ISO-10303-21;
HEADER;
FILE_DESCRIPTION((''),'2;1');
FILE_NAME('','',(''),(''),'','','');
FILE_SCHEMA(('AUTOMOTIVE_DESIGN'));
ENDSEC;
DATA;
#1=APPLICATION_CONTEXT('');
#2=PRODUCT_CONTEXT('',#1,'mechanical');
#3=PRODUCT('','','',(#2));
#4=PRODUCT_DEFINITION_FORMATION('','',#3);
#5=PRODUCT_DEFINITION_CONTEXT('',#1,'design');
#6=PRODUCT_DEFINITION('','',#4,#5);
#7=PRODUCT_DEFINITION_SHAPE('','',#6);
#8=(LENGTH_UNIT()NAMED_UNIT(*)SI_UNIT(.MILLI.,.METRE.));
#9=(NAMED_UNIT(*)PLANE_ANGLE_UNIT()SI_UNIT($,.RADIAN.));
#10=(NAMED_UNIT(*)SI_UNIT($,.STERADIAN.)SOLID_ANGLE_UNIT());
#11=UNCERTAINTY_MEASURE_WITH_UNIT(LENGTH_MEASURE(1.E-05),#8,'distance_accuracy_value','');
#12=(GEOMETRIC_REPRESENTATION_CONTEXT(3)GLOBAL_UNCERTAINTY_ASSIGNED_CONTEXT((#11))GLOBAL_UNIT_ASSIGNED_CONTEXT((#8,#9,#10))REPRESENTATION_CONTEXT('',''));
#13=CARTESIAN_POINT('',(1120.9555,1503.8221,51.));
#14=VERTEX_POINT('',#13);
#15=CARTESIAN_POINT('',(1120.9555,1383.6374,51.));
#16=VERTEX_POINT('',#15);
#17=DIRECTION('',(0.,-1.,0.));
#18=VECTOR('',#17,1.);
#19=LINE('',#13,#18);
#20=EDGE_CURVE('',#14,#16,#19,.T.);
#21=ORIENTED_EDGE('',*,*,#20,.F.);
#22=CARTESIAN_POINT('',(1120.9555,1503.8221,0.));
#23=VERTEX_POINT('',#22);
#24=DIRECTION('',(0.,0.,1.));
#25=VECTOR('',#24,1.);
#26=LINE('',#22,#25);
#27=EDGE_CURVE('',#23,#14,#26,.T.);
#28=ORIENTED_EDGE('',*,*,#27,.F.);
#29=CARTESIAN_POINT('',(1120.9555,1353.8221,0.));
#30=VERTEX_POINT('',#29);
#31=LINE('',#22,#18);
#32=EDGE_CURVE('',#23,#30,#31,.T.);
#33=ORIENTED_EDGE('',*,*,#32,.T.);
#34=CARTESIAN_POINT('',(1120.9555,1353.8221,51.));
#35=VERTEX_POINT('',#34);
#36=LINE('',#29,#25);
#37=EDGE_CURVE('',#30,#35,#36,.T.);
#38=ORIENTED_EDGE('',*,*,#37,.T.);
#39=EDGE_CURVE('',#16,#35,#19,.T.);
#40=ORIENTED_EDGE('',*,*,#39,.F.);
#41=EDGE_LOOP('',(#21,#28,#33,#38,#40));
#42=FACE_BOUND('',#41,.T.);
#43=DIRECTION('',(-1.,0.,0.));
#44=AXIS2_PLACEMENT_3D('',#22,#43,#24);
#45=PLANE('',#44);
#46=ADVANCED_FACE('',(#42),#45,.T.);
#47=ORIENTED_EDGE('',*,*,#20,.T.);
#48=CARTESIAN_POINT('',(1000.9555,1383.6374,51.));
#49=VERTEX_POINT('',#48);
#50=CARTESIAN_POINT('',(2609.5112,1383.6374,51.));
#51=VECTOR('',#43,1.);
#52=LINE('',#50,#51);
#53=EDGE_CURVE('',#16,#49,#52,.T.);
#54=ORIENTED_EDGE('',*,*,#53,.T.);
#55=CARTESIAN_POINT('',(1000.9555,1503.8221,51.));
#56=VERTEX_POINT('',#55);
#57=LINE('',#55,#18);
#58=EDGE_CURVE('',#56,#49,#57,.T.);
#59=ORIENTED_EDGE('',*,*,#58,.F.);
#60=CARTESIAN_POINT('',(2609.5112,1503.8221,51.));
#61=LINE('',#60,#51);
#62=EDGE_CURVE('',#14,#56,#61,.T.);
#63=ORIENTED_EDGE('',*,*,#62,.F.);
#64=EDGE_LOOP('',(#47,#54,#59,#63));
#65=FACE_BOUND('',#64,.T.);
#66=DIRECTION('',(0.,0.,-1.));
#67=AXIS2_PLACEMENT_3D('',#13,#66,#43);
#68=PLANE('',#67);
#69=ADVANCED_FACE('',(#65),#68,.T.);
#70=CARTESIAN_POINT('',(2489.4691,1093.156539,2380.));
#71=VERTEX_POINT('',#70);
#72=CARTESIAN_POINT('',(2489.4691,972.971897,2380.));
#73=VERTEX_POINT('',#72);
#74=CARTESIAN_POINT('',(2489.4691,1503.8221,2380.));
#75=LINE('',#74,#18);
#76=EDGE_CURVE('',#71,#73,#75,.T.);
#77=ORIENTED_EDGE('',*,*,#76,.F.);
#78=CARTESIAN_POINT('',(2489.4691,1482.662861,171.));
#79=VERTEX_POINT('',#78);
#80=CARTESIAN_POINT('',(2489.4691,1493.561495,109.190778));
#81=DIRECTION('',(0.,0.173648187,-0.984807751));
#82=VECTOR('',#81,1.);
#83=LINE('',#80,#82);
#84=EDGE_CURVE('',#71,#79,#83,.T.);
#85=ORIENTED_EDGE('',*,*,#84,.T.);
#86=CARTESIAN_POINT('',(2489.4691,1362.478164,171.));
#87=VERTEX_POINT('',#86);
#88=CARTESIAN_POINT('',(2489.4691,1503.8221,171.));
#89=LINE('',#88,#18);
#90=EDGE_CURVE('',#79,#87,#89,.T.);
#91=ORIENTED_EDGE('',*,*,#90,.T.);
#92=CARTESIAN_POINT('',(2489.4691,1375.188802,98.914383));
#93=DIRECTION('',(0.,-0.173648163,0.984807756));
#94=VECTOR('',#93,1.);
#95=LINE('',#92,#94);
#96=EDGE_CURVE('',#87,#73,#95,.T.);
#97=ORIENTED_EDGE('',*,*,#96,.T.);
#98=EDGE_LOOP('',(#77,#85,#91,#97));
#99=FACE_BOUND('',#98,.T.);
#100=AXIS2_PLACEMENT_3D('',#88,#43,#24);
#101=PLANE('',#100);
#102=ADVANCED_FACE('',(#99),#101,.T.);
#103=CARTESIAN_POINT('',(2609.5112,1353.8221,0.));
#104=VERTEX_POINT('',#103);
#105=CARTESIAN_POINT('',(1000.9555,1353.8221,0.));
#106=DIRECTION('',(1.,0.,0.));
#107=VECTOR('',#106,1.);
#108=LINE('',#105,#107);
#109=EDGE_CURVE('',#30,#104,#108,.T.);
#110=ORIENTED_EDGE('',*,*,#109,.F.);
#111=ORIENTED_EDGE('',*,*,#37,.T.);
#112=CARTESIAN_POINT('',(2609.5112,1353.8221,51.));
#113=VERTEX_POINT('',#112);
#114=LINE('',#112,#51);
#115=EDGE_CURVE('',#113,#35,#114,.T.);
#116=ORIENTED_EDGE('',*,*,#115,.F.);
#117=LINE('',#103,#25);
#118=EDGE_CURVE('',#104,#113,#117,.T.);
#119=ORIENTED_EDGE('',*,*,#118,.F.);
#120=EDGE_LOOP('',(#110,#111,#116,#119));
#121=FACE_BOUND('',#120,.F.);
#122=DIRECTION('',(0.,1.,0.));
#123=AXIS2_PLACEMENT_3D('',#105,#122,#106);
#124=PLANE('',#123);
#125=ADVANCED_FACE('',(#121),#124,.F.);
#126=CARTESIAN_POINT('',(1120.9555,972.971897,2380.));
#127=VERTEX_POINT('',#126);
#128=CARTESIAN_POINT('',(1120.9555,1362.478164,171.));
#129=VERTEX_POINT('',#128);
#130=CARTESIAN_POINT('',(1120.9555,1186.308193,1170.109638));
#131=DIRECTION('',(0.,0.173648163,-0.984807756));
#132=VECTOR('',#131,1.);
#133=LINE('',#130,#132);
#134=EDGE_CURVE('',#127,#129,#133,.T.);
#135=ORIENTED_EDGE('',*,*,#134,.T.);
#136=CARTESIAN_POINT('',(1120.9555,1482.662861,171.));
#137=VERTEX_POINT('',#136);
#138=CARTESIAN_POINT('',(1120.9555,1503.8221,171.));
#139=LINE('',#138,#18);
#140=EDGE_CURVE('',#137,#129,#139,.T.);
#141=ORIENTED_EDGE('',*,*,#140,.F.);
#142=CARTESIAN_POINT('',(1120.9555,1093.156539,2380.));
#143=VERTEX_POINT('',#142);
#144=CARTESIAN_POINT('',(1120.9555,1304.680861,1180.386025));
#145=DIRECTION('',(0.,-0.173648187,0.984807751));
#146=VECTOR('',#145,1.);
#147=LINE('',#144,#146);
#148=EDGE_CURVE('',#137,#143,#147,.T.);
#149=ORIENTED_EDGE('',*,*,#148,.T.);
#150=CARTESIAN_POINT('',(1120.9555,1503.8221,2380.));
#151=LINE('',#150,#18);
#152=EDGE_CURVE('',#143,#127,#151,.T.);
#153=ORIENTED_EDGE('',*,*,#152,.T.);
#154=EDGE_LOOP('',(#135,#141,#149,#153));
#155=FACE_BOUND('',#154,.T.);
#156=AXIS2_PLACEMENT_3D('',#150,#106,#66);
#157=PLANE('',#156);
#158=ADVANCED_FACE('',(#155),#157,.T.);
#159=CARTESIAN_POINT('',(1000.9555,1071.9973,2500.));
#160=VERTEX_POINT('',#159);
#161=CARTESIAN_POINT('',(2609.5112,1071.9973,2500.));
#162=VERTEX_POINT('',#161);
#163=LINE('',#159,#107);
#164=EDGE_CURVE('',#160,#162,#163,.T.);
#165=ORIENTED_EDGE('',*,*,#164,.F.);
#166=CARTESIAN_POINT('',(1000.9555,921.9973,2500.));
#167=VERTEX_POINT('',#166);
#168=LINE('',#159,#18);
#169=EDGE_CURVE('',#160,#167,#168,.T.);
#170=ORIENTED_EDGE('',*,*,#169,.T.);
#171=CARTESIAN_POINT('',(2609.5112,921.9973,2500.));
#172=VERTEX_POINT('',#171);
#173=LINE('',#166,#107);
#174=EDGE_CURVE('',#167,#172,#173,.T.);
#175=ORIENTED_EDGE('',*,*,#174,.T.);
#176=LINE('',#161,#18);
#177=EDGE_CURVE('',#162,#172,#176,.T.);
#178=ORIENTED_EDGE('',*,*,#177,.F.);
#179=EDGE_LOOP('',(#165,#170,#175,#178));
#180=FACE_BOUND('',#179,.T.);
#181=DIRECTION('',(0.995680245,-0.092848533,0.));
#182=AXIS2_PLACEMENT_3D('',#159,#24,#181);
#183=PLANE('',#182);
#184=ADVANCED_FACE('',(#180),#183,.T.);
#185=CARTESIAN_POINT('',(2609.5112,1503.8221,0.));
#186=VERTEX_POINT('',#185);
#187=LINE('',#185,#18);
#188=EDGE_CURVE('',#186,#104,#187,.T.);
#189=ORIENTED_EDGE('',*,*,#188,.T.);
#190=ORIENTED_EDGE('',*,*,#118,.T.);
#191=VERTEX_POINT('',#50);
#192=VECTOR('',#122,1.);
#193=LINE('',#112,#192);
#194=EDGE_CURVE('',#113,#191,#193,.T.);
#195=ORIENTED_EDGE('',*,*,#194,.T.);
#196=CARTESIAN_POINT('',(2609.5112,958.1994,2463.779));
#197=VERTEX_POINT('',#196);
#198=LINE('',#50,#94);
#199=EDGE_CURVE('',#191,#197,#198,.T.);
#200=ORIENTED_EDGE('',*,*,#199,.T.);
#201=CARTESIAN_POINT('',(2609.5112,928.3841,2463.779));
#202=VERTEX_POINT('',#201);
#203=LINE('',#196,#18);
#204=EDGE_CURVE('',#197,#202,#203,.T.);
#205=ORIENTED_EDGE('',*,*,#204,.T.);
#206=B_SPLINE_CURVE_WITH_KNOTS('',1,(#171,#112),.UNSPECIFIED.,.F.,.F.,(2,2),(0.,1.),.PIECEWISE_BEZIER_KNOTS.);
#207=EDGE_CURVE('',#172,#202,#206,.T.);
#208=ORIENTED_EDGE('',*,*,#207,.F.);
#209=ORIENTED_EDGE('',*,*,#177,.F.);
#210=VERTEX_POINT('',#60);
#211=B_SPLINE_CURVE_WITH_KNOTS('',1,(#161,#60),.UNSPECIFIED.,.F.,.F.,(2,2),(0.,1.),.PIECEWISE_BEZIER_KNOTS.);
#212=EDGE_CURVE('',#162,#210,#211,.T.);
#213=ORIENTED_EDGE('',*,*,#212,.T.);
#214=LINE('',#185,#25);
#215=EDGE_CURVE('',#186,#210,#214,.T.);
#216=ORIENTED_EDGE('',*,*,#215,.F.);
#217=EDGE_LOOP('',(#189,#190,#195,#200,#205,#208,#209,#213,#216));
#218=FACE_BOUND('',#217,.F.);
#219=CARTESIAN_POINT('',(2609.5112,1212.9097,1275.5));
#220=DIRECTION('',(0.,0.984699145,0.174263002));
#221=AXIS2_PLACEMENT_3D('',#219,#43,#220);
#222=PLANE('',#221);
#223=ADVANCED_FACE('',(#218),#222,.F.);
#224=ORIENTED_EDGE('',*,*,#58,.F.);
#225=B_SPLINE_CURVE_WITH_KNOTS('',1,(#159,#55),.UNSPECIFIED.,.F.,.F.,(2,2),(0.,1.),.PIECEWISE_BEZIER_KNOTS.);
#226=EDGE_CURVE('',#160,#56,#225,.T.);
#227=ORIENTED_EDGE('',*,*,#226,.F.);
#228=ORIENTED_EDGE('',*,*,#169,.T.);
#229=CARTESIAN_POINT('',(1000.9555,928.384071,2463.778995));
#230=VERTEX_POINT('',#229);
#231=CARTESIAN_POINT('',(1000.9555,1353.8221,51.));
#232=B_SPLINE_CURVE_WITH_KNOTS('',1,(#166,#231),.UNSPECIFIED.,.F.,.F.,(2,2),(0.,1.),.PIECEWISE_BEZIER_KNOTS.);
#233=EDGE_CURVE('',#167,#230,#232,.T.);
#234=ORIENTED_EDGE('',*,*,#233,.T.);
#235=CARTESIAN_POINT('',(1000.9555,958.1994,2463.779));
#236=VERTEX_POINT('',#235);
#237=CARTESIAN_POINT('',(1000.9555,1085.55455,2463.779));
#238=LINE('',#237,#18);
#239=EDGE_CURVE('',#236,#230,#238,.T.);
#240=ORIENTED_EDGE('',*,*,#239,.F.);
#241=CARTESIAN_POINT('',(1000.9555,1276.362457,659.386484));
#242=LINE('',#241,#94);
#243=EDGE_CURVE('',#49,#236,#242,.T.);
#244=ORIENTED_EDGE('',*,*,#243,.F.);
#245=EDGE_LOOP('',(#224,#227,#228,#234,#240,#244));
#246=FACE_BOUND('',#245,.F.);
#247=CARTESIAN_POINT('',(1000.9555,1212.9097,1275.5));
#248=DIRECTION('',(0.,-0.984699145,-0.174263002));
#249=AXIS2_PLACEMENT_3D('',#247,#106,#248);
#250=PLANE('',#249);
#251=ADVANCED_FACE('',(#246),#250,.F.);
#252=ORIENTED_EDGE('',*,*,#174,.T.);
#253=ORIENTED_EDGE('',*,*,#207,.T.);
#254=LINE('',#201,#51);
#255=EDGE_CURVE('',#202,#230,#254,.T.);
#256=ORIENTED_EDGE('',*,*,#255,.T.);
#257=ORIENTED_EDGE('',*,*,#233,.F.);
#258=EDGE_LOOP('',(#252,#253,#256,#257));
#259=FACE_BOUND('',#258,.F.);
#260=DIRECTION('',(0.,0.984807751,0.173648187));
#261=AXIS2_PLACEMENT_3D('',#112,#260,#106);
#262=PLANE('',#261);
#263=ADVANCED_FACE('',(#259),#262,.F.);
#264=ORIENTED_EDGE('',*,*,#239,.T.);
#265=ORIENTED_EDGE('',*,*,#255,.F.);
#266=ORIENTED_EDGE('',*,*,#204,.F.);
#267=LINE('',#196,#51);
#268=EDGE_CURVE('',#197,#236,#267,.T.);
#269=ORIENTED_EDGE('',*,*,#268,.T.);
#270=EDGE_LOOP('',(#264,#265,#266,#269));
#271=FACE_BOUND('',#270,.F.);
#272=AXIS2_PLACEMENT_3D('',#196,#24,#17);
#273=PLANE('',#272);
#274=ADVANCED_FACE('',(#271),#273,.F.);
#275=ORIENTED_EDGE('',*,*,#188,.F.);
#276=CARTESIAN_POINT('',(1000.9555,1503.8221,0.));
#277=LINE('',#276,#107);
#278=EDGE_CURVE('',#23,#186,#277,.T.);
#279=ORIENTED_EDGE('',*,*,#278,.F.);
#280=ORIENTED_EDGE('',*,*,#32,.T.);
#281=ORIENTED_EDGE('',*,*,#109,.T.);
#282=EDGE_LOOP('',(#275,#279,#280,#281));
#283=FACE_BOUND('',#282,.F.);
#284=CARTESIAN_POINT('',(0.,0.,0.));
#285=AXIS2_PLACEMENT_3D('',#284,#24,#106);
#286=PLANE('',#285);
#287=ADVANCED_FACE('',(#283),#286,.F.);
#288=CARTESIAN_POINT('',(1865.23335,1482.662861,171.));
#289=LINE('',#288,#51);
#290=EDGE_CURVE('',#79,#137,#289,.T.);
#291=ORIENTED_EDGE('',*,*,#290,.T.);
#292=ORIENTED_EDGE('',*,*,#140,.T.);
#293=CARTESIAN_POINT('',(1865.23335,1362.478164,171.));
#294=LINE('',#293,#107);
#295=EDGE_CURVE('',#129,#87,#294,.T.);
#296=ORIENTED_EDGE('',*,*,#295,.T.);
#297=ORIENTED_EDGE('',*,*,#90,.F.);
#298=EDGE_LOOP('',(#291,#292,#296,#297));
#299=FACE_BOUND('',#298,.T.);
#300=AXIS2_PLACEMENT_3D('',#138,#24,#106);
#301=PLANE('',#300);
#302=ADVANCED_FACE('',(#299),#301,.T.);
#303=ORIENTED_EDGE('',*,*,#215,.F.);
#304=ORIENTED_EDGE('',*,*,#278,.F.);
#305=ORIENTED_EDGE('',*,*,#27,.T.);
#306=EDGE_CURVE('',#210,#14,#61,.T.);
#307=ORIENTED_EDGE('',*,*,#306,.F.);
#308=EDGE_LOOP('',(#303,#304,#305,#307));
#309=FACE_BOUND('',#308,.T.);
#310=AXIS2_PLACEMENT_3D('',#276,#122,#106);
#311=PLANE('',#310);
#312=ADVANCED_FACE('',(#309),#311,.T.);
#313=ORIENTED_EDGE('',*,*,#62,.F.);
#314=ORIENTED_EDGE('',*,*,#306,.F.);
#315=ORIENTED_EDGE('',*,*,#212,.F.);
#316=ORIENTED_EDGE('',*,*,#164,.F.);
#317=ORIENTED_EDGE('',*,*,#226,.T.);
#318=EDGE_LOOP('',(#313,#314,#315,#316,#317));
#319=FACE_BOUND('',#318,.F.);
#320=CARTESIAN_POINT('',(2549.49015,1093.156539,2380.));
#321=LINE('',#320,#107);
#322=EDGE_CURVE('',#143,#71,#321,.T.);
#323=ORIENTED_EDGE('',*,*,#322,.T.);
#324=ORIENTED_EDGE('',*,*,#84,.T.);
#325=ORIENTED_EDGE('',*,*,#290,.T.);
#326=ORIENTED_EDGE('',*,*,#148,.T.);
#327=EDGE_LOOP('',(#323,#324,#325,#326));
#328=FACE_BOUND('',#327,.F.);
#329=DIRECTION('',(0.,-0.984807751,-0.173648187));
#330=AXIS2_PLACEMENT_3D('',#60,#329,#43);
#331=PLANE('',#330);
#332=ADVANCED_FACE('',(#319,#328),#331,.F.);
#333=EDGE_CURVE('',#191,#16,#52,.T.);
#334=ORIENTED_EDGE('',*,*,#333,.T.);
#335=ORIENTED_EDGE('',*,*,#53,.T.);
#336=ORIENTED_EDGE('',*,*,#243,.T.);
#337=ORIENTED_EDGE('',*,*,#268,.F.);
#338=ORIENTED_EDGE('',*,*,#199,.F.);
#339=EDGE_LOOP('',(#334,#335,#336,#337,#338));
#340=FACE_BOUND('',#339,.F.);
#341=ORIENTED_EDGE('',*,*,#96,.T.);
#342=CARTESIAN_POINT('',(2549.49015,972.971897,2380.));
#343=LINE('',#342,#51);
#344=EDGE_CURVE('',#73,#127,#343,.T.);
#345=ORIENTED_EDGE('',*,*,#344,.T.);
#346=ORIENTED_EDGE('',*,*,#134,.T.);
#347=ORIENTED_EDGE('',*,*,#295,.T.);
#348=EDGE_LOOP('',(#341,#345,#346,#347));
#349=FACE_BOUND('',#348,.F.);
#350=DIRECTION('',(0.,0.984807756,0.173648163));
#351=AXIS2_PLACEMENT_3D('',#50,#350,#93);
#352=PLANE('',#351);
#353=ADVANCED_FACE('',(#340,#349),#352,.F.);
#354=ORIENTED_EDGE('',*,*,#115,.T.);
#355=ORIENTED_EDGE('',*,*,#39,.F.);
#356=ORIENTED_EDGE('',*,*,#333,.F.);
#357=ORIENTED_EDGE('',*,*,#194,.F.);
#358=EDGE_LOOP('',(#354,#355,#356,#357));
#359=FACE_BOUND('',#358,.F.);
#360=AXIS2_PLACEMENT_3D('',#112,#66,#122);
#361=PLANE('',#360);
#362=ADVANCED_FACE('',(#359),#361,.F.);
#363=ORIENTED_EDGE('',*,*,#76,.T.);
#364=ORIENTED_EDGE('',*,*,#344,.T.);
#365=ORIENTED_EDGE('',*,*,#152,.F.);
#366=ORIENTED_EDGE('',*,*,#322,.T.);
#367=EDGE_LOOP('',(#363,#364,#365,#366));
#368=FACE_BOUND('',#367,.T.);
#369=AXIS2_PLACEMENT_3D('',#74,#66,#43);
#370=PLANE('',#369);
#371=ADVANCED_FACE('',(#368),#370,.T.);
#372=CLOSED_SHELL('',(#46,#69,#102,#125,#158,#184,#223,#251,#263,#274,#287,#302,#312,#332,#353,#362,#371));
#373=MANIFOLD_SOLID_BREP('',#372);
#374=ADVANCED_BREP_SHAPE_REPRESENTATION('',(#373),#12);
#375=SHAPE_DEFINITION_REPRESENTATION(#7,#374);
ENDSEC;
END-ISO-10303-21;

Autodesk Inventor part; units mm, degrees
sketch "Sketch19" plane through (0, 0, 0) normal (0, 0, 1) x (1, 0, 0)
  line L0 (1200.9555, -1496.1779) -> (1200.9555, 1503.8221)
  line L1 (-4726.1559, 1503.8221) -> (4728.0669, 1503.8221)
  line L2 (4418.0669, -1496.1779) -> (4418.0669, 1503.8221)
  line L3 (1200.9555, 1503.8221) -> (4418.0669, 1503.8221)
  line L4 (1200.9555, 1503.8221) -> (1000.9555, 1503.8221)
  line L5 (1000.9555, 1503.8221) -> (1000.9555, -1496.1779)
  line L6 (2809.5112, 1503.8221) -> (2609.5112, 1503.8221)
  line L7 (2609.5112, 1503.8221) -> (2609.5112, -1496.1779)
  line L8 (2609.5112, -1496.1779) -> (2509.5112, -1496.1779)
  line L9 (2509.5112, -1496.1779) -> (2509.5112, 1503.8221)
  line L10 (1200.9555, -1496.1779) -> (1000.9555, -1496.1779)
  line L11 (1000.9555, 1503.8221) -> (1000.9555, 1353.8221)
  line L12 (1000.9555, 1353.8221) -> (2609.5112, 1353.8221)
  point P0 (0, 0)
  dimension "d29" = 200
  dimension "d30" = 200
  dimension "d31" = 100
  dimension "d32" = 150
ref_plane "Work Plane17" through (0, 0, 2500) normal (0, 0, 1) x (1, 0, 0)
sketch "Sketch20" plane through (0, 0, 2500) normal (0, 0, 1) x (1, 0, 0)
  line L0 (-4726.1559, 1503.8221) -> (4728.0669, 1503.8221) projected
  line L1 (1200.9555, -1496.1779) -> (1200.9555, 1503.8221) projected
  line L2 (1000.9555, 1503.8221) -> (1000.9555, -1496.1779) projected
  line L3 (2509.5112, -1496.1779) -> (2509.5112, 1503.8221) projected
  line L4 (2609.5112, 1503.8221) -> (2609.5112, -1496.1779) projected
  line L5 (1000.9555, 1353.8221) -> (2609.5112, 1353.8221) projected
  point P0 (0, 0)
extrude "Extrusion4" add sketch "Sketch19" along normal blind 51 contours L12 L5 L1 L0 | L0 L1 L9 L12 | L9 L1 L7 L12
ref_plane "Work Plane18" through (0, 0, 51) normal (0, 0, 1) x (1, 0, 0)
sketch "Sketch22" plane through (0, 0, 51) normal (0, 0, 1) x (1, 0, 0)
  line L0 (2609.5112, 1503.8221) -> (1000.9555, 1503.8221) projected
  line L1 (1000.9555, 1503.8221) -> (1000.9555, 1353.8221) projected
  line L2 (1000.9555, 1353.8221) -> (2609.5112, 1353.8221) projected
  line L3 (2609.5112, 1353.8221) -> (2609.5112, 1503.8221) projected
  line L4 (1000.9555, 1503.8221) -> (2609.5112, 1503.8221)
  line L5 (2609.5112, 1503.8221) -> (2609.5112, 1353.8221)
  line L6 (2609.5112, 1353.8221) -> (1000.9555, 1353.8221)
  line L7 (1000.9555, 1353.8221) -> (1000.9555, 1503.8221)
  point P0 (0, 0)
ref_plane "Work Plane19" through (1000.9555, 1503.8221, 51) normal (-1, 0, 0) x (0, -1, 0)
sketch "Sketch23" plane through (1000.9555, 1503.8221, 51) normal (-1, 0, 0) x (0, -1, 0)
  line L0 (150, 0) -> (0, 0) projected
  line L1 (0, 2449) -> (3000, 2449) projected
  line L2 (0, 0) -> (431.8248, 2449)
  line L3 (0, 0) -> (2486.7798, 0) construction
  line L4 (0, 0) -> (150, 0)
  line L5 (150, 0) -> (0, 0)
  line L6 (150, 0) -> (581.8248, 2449)
  line L7 (150, 0) -> (2636.7798, 0) construction
  line L8 (581.8248, 2449) -> (431.8248, 2449)
  point P0 (1503.8221, -51)
  point P1 (0, 2449)
  dimension "d37" = 80
  dimension "d38" = 80
sketch "Sketch24" plane through (0, 0, 2500) normal (0, 0, 1) x (1, 0, 0)
  line L0 (1000.9555, 1071.9973) -> (2609.5112, 1071.9973)
  line L1 (1000.9555, 921.9973) -> (2609.5112, 921.9973)
  line L2 (2609.5112, 1071.9973) -> (2609.5112, 921.9973)
  line L3 (1000.9555, 1071.9973) -> (1000.9555, 921.9973)
  point P0 (0, 0)
loft "Loft2" add profiles "Sketch24" section 2 edges at (2609.5112, 1428.8221, 51) (1805.2334, 1503.8221, 51) (1000.9555, 1428.8221, 51) (1805.2334, 1353.8221, 51)
sketch "Sketch25" plane through (2609.5112, 1353.8221, 0) normal (1, 0, 0) x (0, 0, -1)
  line L0 (0, 0) -> (0, 150) projected
  line L1 (0, 150) -> (-51, 150) projected
  line L2 (-2500, -281.8248) -> (-51, 150) projected
  line L3 (-2500, -281.8248) -> (-2500, -431.8248) projected
  line L4 (-2500, -431.8248) -> (-51, 0) projected
  line L5 (0, 0) -> (-51, 0) projected
  line L6 (-51, 0) -> (-51, 29.8153)
  line L7 (-51, 0) -> (-21.1847, 0) construction
  line L8 (-51, 29.8153) -> (-2463.779, -395.6227)
  line L9 (-2500, -431.8248) -> (-51, 0) projected
  line L10 (-51, 29.8153) -> (2399, 29.8153) construction
  line L11 (-2463.779, -395.6227) -> (-2463.779, -425.438)
  line L12 (-2463.779, -425.438) -> (-51, 0)
  point P0 (0, -1353.8221)
  point P1 (-2463.779, -425.438)
  point P2 (-51, 0)
  dimension "d43" = 90
  dimension "d44" = 2450
  dimension "d45" = 170
extrude "Extrusion5" cut sketch "Sketch25" against normal through all contours L4 L11 L8 L6
ref_plane "Work Plane20" through (4728.0669, 1503.8221, 51) normal (0, -1, 0) x (-1, 0, 0)
sketch "Sketch26" plane through (4728.0669, 1503.8221, 51) normal (0, -1, 0) x (-1, 0, 0)
  line L0 (2118.5557, 0) -> (3727.1114, 0) projected
  line L1 (3727.1114, -2449) -> (3727.1114, 0) projected
  line L2 (2118.5557, -2449) -> (2118.5557, 0) projected
  line L3 (3727.1114, -2449) -> (2118.5557, -2449) projected
  line L4 (2118.5557, -2449) -> (2238.5978, -2449)
  line L5 (2238.5978, -2449) -> (2238.5978, -2329)
  line L6 (2238.5978, -2329) -> (2118.5557, -2329)
  line L7 (2118.5557, -2329) -> (2118.5557, -2449)
  line L8 (3727.1114, 0) -> (3607.1114, 0)
  line L9 (3607.1114, 0) -> (3607.1114, -120)
  line L10 (3607.1114, -120) -> (3727.1114, -120)
  line L11 (3727.1114, -120) -> (3727.1114, 0)
  line L12 (3607.1114, -120) -> (2238.5978, -120)
  line L13 (2238.5978, -120) -> (2238.5978, -2329)
  line L14 (2238.5978, -2329) -> (3607.1114, -2329)
  line L15 (3607.1114, -2329) -> (3607.1114, -120)
  point P0 (4728.0669, 51)
  dimension "d49" = 120
  dimension "d50" = 120
  dimension "d51" = 120
extrude "Extrusion6" cut sketch "Sketch26" along normal through all contours L15 L14 L13 L12
sketch "Sketch27" plane through (1000.9555, 1503.8221, 0) normal (0, 1, 0) x (1, 0, 0)
  line L0 (1608.5557, 0) -> (0, 0) projected
  line L1 (0, 0) -> (120, 0)
  line L2 (120, 0) -> (120, -51)
  line L3 (0, 0) -> (0, -51) projected
  line L4 (1608.5557, -51) -> (0, -51) projected
  line L5 (0, 0) -> (0, -51)
  line L6 (0, -51) -> (120, -51)
  line L7 (120, -2380) -> (120, -171) projected
  line L8 (0, -2500) -> (0, -51) projected
  point P0 (-1000.9555, 0)
  dimension "d54" = 120
extrude "Extrusion7" cut sketch "Sketch27" against normal through all
properties part number "eave_frame_01" material "Wood (Maple)"
